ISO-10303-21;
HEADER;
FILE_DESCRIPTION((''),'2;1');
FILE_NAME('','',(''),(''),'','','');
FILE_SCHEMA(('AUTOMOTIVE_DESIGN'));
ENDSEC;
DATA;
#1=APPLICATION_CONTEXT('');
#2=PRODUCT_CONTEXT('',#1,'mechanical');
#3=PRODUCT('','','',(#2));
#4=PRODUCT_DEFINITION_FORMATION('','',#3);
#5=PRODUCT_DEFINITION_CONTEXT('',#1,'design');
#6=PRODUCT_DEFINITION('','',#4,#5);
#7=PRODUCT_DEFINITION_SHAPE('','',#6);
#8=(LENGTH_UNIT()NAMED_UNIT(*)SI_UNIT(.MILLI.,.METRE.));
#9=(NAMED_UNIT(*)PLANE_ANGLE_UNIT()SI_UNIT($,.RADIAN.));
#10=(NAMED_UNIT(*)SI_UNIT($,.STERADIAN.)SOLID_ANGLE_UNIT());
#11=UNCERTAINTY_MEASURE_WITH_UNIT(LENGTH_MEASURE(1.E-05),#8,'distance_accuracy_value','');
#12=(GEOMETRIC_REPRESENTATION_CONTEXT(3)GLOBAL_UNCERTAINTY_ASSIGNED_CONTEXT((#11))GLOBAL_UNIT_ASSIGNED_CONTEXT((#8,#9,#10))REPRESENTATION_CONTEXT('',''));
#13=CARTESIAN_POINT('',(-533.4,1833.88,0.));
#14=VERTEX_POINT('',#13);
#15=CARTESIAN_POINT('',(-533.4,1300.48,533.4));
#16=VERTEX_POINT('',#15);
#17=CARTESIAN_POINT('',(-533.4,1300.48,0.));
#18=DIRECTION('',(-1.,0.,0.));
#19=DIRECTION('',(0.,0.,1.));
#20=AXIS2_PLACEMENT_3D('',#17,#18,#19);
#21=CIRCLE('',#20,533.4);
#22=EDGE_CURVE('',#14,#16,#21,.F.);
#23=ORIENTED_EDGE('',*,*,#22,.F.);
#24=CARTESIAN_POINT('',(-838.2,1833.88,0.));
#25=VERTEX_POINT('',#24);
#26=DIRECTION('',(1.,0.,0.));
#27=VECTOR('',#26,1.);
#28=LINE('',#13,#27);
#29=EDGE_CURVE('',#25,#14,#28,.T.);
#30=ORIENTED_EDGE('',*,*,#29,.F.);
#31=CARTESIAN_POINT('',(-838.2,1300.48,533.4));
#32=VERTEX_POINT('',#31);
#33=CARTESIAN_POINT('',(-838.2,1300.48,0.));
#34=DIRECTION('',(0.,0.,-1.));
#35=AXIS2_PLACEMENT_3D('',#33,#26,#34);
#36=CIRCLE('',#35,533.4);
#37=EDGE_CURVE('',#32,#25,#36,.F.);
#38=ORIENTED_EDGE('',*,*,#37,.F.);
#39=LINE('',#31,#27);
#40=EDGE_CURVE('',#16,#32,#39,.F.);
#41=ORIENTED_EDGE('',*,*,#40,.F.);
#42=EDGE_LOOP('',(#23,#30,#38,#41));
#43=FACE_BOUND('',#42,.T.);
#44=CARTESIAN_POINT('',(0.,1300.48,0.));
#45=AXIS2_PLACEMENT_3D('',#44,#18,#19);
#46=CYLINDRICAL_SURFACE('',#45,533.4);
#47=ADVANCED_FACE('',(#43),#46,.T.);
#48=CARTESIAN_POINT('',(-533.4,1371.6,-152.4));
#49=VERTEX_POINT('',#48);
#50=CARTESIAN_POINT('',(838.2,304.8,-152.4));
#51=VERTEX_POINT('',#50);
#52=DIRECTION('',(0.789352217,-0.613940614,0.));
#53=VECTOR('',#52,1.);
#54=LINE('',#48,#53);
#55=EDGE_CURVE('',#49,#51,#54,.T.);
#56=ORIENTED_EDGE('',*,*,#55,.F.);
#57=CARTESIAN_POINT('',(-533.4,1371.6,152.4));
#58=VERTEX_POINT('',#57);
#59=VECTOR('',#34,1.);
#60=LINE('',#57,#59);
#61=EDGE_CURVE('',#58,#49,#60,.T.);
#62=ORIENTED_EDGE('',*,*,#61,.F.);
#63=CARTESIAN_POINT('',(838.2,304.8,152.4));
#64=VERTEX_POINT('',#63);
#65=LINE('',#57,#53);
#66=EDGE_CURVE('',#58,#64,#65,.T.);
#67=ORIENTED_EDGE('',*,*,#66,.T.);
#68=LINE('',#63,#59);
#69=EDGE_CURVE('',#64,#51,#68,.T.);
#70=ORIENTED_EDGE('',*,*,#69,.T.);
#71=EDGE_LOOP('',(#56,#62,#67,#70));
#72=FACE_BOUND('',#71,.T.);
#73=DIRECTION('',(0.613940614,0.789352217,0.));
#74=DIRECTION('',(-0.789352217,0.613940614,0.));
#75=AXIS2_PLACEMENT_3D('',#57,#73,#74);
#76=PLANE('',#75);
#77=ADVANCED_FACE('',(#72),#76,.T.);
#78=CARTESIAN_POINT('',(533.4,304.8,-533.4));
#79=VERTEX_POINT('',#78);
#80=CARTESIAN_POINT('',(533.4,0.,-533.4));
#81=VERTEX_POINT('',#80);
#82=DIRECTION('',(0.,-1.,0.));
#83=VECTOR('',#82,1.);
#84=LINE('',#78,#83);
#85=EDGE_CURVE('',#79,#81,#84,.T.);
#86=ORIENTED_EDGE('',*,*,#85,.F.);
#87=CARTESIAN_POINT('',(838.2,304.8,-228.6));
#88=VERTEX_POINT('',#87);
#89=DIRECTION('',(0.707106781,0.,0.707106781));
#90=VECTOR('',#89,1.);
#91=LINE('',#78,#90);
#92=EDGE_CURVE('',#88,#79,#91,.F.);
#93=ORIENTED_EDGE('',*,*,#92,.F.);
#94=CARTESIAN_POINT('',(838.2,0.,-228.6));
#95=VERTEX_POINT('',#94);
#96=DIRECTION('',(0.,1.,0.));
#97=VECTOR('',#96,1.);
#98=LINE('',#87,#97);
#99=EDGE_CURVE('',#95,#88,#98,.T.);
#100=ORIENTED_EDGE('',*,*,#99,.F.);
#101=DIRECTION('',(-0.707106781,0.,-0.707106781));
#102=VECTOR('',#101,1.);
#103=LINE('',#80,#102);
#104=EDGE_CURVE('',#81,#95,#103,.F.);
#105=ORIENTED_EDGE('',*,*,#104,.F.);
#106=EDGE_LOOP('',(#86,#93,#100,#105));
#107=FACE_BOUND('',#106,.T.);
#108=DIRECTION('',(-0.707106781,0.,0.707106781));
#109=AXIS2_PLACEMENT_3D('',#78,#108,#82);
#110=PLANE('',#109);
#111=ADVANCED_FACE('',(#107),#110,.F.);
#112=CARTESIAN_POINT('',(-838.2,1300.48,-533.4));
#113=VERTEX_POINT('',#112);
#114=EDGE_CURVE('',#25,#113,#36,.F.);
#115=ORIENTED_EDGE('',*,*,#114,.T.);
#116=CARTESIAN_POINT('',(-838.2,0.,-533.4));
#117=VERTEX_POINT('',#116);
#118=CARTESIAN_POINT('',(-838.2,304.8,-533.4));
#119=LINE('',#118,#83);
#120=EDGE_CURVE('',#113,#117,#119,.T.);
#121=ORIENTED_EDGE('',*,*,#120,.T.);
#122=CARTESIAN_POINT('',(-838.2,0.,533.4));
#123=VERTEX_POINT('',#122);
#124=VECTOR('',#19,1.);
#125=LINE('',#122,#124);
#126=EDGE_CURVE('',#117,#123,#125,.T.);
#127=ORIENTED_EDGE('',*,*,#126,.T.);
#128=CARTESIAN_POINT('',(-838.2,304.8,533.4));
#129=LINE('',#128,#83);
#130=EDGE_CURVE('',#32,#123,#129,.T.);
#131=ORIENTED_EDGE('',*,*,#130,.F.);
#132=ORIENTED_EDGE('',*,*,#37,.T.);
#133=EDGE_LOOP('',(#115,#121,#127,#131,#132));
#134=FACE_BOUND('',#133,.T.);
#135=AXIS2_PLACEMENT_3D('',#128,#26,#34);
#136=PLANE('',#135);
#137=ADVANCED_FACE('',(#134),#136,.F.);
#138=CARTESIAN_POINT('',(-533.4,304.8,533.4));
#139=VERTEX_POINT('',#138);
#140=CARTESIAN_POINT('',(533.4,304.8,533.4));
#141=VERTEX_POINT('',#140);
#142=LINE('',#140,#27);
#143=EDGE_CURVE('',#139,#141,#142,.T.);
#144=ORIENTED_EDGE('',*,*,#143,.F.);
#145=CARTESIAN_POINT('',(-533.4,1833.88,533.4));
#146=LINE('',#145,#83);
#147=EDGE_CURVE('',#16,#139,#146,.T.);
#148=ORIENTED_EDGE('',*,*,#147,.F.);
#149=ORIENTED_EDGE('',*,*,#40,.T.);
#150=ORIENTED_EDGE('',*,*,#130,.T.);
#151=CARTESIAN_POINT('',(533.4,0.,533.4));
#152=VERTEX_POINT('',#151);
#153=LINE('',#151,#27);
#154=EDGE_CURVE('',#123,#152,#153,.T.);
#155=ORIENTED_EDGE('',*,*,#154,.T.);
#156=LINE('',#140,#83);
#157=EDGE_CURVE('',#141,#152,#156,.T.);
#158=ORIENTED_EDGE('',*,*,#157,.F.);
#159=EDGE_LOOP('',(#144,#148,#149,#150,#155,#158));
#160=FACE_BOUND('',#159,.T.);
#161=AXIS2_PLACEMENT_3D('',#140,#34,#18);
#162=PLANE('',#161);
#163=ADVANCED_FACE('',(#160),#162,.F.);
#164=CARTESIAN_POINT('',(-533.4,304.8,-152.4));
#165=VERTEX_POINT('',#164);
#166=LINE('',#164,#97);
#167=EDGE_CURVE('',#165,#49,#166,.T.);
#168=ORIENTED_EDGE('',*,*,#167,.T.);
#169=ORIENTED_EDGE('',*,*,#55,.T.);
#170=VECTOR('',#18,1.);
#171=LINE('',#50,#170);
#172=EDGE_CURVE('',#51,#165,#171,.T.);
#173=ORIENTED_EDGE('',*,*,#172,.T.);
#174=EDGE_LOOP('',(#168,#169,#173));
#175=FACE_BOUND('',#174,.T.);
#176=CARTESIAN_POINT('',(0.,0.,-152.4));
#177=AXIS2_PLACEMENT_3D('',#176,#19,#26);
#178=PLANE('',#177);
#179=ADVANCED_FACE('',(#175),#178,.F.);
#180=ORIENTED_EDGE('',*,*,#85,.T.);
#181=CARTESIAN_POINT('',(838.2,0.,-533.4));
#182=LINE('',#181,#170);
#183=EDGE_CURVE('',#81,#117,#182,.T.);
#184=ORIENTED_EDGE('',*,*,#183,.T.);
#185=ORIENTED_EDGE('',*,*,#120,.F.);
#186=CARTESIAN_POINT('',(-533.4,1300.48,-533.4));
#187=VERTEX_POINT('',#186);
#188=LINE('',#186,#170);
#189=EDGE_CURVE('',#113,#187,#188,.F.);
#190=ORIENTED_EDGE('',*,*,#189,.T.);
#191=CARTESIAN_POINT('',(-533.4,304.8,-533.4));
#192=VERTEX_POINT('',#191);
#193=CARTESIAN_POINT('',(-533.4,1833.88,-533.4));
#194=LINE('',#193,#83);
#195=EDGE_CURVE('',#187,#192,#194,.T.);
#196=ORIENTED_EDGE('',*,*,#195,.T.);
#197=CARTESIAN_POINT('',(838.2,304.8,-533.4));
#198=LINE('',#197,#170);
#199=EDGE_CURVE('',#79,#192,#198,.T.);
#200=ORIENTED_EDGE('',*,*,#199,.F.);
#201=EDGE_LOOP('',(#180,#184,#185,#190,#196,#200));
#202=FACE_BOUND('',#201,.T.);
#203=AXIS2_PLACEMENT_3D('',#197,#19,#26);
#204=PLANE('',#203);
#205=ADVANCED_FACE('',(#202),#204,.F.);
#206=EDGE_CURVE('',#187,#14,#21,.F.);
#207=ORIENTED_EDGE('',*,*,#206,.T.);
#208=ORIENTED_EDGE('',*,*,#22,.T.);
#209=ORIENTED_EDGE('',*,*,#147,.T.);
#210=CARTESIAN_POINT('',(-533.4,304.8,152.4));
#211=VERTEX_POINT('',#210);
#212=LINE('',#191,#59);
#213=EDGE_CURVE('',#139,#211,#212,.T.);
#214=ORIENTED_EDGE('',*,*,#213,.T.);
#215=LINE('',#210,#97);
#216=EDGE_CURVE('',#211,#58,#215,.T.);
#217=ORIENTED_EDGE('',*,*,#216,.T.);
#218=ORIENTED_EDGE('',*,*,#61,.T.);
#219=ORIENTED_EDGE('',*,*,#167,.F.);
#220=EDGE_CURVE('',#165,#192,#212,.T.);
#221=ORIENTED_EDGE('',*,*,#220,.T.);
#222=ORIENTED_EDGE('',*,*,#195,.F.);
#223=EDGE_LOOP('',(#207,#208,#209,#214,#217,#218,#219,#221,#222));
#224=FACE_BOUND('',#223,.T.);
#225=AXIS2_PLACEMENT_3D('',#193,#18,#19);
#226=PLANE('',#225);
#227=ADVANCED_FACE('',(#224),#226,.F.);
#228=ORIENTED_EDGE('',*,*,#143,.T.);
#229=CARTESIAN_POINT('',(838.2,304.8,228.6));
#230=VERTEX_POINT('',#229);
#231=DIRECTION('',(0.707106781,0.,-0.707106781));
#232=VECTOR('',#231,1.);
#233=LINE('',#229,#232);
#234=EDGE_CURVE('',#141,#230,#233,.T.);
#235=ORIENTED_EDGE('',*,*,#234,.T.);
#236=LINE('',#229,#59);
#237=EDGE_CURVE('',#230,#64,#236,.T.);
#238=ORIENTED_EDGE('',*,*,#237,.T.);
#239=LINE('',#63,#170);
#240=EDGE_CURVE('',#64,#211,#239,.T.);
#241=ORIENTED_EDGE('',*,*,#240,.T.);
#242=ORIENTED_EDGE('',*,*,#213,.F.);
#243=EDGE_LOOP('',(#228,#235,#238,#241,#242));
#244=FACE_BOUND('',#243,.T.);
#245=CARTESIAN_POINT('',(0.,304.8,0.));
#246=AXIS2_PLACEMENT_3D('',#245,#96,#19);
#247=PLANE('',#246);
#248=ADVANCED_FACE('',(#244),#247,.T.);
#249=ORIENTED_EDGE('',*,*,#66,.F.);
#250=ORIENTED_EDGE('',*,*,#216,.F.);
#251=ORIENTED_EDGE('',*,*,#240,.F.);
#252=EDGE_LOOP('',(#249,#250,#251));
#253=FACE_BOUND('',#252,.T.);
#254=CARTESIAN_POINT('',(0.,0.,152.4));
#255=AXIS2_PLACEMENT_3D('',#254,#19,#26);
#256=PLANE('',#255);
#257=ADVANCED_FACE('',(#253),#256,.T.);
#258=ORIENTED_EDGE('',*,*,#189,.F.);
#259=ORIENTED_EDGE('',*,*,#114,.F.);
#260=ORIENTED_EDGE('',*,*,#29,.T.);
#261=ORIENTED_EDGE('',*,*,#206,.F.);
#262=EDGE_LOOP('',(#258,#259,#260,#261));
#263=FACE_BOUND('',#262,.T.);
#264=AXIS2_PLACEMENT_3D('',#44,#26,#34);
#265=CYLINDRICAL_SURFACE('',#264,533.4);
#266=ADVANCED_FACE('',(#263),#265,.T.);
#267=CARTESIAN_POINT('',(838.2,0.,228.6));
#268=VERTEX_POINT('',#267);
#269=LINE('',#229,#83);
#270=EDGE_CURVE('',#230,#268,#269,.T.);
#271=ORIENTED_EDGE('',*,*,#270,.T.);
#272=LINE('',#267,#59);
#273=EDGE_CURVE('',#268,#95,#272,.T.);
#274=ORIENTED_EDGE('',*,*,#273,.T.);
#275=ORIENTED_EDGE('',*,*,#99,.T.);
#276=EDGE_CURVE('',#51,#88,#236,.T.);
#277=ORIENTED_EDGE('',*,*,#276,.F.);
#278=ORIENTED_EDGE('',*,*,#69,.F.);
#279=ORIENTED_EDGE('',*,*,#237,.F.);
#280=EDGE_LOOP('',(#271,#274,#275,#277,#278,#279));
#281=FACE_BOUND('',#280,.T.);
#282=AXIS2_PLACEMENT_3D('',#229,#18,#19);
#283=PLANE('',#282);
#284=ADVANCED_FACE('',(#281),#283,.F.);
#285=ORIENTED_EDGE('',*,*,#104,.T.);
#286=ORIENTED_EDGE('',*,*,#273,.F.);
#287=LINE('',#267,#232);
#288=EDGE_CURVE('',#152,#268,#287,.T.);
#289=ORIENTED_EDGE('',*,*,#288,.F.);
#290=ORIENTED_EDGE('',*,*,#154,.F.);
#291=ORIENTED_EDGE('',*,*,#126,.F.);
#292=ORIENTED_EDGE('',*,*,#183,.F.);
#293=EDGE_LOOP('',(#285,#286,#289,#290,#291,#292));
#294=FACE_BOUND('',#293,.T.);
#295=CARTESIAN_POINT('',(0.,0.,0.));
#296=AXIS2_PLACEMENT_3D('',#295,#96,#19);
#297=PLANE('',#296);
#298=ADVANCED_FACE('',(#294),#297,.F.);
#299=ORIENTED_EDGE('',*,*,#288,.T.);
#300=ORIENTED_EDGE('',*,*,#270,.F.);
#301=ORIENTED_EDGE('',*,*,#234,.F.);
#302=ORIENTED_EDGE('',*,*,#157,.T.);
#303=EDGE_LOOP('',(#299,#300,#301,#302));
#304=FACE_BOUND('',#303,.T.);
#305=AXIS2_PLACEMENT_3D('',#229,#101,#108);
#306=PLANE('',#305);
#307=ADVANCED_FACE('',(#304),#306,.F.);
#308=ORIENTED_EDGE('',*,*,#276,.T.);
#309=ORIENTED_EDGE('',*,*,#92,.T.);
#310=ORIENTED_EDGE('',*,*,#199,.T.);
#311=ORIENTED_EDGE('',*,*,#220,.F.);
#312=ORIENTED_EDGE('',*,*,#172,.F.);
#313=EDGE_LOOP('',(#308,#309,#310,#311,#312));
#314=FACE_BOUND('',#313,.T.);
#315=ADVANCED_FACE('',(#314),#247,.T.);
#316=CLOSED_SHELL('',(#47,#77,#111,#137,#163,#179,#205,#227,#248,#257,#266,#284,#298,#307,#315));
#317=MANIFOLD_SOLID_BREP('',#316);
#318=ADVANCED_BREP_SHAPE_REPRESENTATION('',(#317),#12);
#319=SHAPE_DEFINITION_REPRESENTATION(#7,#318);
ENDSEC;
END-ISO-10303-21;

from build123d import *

# Parameters (mm, degrees)
BOSS_EXTRUDE1_DEPTH = 304.8
CHAMFER1_SIZE       = 304.8
SKETCH3_W           = 304.8
SKETCH3_H           = 1066.8
BOSS_EXTRUDE2_DEPTH = 1529.08
FILLET1_R           = 533.4
BOSS_EXTRUDE3_DEPTH = 152.4


with BuildPart() as part:
    # Sketch1 → Boss-Extrude1 (new body)
    with BuildSketch(Plane(origin=(0, 0, 0), x_dir=(1, 0, 0), z_dir=(0, 1, 0))):
        Polygon((838.2, -228.6), (533.4, -533.4), (-838.2, -533.4), (-838.2, 533.4), (838.2, 533.4), align=None)
    extrude(amount=BOSS_EXTRUDE1_DEPTH)

    # Chamfer1
    chamfer1_edges = [part.edges().sort_by_distance(p)[0] for p in [
        (838.2, 152.4, -533.4),
    ]]
    chamfer(chamfer1_edges, length=CHAMFER1_SIZE)

    # Sketch3 → Boss-Extrude2 (add)
    with BuildSketch(Plane(origin=(0, 304.8, 0), x_dir=(1, 0, 0), z_dir=(0, 1, 0))):
        with Locations((-685.8, 0)):
            Rectangle(SKETCH3_W, SKETCH3_H)
    extrude(amount=BOSS_EXTRUDE2_DEPTH)

    # Fillet1
    fillet1_edges = [part.edges().sort_by_distance(p)[0] for p in [
        (-685.8, 1833.88, -533.4),
        (-685.8, 1833.88, 533.4),
    ]]
    fillet(fillet1_edges, radius=FILLET1_R - 0.0001)  # a hair under: the kernel refuses the full size

    # Sketch4 → Boss-Extrude3 (add, symmetric)
    with BuildSketch(Plane.XY):
        Polygon((-533.4, 1371.6), (838.2, 304.8), (-533.4, 304.8), align=None)
    extrude(amount=BOSS_EXTRUDE3_DEPTH, both=True)


solid = part.part
